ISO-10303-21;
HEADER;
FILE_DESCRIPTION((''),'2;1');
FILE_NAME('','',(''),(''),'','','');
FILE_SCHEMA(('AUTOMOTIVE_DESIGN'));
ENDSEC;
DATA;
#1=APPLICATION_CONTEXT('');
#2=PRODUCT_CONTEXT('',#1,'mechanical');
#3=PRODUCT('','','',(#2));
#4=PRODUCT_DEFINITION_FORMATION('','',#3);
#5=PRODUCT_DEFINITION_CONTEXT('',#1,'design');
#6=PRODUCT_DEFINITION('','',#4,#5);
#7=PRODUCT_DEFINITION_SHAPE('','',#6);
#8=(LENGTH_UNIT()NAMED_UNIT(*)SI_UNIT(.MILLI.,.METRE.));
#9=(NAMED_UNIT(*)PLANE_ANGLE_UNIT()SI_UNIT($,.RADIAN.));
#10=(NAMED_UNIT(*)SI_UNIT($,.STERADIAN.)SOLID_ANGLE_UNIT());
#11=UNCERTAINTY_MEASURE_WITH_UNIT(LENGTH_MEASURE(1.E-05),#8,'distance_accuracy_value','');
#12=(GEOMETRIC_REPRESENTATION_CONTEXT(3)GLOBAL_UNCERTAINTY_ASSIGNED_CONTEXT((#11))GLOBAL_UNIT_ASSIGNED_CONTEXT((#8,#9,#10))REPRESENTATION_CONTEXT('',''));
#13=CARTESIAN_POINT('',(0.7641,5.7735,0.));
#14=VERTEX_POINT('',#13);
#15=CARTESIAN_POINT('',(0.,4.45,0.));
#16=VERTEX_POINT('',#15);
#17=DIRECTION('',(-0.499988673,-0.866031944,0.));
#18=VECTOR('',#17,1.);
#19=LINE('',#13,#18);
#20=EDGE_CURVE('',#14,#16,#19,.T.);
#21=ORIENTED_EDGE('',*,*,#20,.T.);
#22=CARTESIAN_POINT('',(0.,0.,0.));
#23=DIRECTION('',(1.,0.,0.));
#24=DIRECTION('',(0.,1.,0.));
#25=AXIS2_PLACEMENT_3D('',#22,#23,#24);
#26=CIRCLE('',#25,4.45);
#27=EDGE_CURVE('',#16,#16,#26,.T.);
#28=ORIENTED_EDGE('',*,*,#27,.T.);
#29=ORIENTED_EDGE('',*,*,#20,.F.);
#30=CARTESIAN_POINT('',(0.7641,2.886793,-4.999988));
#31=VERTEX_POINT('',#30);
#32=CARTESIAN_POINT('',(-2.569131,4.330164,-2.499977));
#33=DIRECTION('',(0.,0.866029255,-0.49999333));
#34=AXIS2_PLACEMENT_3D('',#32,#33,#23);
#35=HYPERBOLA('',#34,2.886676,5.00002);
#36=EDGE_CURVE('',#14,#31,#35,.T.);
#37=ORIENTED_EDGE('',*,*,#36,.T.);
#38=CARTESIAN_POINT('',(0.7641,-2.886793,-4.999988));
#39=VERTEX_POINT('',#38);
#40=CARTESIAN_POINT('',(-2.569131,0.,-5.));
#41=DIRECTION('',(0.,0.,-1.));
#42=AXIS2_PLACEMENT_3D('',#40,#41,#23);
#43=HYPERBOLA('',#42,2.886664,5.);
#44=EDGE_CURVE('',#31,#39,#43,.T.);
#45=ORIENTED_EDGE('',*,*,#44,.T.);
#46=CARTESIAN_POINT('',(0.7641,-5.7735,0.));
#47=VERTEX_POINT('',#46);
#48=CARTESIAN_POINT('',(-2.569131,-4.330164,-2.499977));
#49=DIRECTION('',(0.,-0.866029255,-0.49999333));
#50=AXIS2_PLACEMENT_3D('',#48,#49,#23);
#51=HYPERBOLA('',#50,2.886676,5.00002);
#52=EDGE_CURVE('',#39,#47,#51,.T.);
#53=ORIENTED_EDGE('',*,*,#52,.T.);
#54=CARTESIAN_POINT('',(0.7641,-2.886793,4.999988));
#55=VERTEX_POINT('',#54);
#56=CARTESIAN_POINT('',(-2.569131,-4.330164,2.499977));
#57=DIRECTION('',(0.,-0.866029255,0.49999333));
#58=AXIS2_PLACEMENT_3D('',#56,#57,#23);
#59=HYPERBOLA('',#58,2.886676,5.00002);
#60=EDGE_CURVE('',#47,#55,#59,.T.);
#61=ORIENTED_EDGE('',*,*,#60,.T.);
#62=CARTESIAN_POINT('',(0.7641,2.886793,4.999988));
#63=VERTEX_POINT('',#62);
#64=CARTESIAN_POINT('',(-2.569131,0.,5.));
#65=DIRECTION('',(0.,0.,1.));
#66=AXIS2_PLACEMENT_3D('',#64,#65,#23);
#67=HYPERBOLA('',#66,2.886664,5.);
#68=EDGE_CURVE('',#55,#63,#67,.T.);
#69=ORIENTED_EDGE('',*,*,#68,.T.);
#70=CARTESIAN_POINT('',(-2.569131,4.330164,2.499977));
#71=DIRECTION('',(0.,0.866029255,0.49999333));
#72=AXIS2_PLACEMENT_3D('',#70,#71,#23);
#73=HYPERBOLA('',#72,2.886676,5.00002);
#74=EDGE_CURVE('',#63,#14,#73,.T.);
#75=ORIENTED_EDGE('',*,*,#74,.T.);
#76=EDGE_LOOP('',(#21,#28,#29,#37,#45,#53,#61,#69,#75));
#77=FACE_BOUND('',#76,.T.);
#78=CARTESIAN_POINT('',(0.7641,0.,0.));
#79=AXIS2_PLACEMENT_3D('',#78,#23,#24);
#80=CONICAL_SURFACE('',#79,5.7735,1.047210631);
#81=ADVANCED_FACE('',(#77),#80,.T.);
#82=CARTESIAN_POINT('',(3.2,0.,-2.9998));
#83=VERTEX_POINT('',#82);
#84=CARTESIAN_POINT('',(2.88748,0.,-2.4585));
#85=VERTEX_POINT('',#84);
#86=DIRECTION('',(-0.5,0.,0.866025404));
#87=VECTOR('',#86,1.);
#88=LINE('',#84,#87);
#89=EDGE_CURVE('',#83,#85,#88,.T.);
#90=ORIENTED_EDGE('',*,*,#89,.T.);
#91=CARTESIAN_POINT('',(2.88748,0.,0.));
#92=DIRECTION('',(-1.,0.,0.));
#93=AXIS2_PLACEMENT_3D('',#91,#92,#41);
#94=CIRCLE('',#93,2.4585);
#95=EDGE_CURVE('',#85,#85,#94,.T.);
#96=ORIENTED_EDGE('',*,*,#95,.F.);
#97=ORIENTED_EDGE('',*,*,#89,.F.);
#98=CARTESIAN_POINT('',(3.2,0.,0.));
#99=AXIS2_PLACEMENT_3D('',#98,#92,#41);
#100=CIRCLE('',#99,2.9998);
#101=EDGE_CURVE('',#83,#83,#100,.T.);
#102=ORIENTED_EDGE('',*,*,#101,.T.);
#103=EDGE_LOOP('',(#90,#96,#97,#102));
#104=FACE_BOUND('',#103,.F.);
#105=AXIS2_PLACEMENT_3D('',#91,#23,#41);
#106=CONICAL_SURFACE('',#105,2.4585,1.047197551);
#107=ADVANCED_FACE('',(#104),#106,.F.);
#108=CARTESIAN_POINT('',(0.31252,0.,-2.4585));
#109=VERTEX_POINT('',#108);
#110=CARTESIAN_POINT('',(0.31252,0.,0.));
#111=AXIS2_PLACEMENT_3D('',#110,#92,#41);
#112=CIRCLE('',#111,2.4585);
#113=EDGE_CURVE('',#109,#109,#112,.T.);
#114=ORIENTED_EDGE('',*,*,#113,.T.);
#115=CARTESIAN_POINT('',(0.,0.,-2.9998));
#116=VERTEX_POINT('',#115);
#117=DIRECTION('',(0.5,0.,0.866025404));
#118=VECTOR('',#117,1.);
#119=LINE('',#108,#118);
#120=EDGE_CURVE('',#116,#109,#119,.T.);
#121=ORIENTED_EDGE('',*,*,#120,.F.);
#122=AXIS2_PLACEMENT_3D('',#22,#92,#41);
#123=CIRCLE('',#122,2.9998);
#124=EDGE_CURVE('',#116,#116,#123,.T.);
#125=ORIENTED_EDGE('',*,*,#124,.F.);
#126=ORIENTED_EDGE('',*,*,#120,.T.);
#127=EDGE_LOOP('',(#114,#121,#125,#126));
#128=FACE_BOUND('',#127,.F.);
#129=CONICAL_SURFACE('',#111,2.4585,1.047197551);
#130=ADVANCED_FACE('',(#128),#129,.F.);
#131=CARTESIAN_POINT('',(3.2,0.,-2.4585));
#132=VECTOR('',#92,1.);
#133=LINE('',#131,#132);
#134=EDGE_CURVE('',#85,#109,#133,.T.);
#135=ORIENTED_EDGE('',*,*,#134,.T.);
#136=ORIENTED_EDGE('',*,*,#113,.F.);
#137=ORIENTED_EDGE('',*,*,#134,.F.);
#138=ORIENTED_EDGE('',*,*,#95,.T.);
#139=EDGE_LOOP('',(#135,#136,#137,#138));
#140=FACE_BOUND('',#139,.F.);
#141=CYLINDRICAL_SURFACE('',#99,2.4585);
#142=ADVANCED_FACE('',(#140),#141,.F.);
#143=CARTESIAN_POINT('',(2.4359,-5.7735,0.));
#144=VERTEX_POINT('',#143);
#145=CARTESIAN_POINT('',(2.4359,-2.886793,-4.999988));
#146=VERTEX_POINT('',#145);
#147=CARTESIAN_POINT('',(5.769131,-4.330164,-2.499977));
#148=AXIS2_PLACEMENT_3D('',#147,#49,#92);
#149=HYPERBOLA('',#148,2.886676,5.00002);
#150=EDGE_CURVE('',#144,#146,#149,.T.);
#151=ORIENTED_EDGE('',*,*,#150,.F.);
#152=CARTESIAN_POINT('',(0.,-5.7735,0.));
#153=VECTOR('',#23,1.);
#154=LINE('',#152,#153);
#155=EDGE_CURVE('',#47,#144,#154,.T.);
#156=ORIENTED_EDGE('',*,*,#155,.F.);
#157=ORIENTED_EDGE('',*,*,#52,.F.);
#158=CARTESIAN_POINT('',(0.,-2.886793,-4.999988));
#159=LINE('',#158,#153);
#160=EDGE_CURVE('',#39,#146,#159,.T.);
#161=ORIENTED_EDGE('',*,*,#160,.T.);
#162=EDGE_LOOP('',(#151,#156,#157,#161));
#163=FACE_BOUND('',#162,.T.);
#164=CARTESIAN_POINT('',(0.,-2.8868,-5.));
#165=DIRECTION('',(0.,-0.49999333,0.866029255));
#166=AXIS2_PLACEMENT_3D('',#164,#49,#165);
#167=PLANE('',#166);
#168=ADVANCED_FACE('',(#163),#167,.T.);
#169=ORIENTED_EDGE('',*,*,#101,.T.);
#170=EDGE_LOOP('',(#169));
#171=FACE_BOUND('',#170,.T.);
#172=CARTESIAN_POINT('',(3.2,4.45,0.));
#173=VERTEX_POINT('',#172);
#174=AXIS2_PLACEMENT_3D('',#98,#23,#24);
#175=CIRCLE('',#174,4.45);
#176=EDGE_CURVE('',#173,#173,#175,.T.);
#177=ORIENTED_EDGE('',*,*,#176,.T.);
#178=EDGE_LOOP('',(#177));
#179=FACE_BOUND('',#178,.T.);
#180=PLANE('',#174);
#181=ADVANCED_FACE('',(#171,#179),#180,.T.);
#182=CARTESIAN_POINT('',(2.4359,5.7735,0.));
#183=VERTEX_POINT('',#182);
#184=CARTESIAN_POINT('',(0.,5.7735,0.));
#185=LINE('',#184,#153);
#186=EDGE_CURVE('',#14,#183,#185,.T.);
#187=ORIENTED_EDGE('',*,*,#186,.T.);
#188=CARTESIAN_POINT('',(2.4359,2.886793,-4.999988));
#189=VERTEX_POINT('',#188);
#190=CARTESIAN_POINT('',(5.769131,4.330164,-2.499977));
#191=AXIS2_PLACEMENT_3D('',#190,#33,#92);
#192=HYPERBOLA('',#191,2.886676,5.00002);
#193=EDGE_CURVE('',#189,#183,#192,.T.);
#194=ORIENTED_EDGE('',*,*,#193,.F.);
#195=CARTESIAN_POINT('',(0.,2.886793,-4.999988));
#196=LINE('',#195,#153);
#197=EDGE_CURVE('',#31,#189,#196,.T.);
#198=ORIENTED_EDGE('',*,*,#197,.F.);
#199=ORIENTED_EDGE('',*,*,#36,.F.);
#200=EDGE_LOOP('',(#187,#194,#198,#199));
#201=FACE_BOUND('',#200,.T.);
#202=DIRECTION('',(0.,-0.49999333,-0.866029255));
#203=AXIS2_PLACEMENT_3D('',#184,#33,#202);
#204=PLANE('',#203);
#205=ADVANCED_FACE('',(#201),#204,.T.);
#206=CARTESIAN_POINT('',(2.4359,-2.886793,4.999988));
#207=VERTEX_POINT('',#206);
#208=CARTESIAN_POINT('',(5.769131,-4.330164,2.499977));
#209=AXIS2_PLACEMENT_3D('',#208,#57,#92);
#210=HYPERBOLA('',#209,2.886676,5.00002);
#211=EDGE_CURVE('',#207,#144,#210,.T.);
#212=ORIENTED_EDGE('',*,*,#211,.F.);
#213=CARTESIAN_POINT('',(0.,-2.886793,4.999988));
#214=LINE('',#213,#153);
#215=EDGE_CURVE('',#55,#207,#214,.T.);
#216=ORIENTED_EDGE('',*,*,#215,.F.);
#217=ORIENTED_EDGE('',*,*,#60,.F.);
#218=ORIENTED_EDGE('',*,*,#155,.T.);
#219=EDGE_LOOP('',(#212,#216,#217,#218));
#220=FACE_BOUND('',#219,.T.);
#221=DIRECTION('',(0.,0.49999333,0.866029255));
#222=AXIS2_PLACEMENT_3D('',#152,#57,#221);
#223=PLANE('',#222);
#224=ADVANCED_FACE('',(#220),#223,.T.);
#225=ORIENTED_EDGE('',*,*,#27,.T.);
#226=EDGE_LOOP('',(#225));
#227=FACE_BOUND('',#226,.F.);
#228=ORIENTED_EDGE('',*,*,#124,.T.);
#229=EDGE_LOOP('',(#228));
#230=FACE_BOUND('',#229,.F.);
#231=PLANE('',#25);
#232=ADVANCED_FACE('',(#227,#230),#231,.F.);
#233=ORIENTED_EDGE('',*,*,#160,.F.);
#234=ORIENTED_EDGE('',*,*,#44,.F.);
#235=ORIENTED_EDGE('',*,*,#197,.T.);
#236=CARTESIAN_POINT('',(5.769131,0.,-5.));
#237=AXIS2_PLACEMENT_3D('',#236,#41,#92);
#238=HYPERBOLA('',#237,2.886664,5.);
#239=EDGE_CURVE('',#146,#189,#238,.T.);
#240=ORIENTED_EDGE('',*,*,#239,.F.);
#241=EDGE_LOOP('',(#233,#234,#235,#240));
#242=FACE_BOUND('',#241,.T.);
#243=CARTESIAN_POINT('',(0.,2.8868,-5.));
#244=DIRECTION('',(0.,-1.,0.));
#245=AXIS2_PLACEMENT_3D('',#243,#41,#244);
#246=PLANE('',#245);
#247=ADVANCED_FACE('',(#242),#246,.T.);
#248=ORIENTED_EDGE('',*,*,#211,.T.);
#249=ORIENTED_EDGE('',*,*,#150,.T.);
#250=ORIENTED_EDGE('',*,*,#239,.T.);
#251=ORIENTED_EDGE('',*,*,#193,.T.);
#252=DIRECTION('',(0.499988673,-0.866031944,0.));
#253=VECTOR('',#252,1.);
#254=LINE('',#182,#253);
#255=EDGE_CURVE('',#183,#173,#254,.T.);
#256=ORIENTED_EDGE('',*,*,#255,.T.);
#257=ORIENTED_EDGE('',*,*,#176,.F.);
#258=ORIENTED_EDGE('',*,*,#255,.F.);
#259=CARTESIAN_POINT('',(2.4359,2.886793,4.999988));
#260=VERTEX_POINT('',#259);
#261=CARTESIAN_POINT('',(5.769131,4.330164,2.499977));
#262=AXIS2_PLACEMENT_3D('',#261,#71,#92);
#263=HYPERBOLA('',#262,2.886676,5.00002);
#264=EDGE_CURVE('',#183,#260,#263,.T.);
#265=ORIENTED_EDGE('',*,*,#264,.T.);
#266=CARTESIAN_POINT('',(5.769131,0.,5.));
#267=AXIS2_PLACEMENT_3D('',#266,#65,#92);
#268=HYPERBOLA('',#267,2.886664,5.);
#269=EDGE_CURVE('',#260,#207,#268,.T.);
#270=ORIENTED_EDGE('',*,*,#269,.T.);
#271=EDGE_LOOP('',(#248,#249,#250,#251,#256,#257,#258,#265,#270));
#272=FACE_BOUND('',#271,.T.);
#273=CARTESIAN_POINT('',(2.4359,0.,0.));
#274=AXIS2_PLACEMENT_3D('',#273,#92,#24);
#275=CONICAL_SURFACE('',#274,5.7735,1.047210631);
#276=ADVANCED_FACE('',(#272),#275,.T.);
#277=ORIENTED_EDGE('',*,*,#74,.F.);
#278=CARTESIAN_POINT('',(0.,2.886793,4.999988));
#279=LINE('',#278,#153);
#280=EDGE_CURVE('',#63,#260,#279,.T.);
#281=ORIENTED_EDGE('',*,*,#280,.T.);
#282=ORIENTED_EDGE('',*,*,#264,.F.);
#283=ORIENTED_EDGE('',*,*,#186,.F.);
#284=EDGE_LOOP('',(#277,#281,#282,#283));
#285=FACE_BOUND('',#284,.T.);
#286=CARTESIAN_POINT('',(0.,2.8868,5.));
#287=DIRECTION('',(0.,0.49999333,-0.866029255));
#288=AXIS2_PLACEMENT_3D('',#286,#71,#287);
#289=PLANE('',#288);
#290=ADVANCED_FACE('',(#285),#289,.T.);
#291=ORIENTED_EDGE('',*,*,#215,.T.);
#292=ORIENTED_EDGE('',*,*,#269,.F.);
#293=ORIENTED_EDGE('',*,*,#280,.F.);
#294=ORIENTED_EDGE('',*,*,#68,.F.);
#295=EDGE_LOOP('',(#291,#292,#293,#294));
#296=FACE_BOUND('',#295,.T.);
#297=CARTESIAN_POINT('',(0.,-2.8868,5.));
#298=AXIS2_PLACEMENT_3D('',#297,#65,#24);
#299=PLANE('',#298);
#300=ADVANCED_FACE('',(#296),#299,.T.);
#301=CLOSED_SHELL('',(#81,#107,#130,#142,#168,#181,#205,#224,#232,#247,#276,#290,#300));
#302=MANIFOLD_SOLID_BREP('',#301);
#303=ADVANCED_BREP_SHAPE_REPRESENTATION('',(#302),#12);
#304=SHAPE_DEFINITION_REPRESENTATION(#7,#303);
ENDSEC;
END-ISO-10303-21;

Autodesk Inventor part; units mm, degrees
ref_plane "YZ Plane" through (0, 0, 0) normal (1, 0, 0) x (0, 1, 0)
ref_plane "XZ Plane" through (0, 0, 0) normal (0, 1, 0) x (-1, 0, 0)
sketch "Szkic1" plane through (0, 0, 0) normal (1, 0, 0) x (0, 1, 0)
  line L0 (-5.7735, 0) -> (-2.8868, 5)
  line L1 (-2.8868, 5) -> (2.8868, 5)
  line L2 (2.8868, 5) -> (5.7735, 0)
  line L3 (5.7735, 0) -> (2.8868, -5)
  line L4 (2.8868, -5) -> (-2.8868, -5)
  line L5 (-2.8868, -5) -> (-5.7735, 0)
  point P0 (0, 0)
  point P1 (0, 0)
  dimension "d0" = 11.547
extrude "Bryła" add sketch "Szkic1" along normal blind 3.2
sketch "Szkic2" plane through (0, 0, 0) normal (0, 0, 1) x (1, 0, 0)
  line L0 (0, 2.8868) -> (0, 5.7735) projected
  line L1 (0, 5.7735) -> (3.2, 5.7735) projected
  line L2 (3.2, 2.8868) -> (3.2, 5.7735) projected
  line L3 (-0.64, 0) -> (3.84, 0) projected
  line L4 (0.7641, 5.7735) -> (0, 4.45)
  line L5 (2.4359, 5.7735) -> (3.2, 4.45)
  dimension "d3" = 30
  dimension "d4" = 30
  dimension "d5" = 8.9
  dimension "d6" = 8.9
revolve "Faza1" cut sketch "Szkic2" angle 360 about axis through (-10, 0, 0) along (1, 0, 0)
sketch "Szkic3" plane through (3.2, 0, 0) normal (1, 0, 0) x (0, 0, -1)
  arc A0 (-0.625, -1.0825) -> (0.625, -1.0825) centre (0, 0) ccw projected
hole "Gwint" at (3.2, 0, 0) direction (-1, 0, 0) diameter 4.917 end through all thread size "M6x1" class "6H" standard "ISO Metric profile"
chamfer "Faza2" distance 0.5413 angle 30 1 edges at (3.2, 0, 2.4585) measured on face at (3.2, 3.7371, -0.4538)
chamfer "Faza3" distance 0.5413 angle 30 1 edges at (0, 0, 2.4585) measured on face at (0, 3.7371, -0.4538)
ref_plane "Work Plane1" through (-12.4358, 0, 0) normal (0, -0.8660254, -0.5) x (1, 0, 0)
equation "\"d0\" = 1.1547 * SW"
equation "\"d1\" = KOH"
equation "\"d3\" = ANG1"
equation "\"d4\" = ANG2"
equation "\"d5\" = SW0"
equation "\"d6\" = SW01"
equation "\"d8\" = -0.5 * GD1 + 0.5 * NND"
equation "\"d40\" = -0.5 * GD1 + 0.5 * NND"
equation "\"d10\" = -0.5 * GD1 + 0.5 * NND"
equation "\"d41\" = -0.5 * GD1 + 0.5 * NND"
equation "\"ANG1\" = 30deg"
equation "\"ANG2\" = 30deg"
equation "\"NND\" = 6"
equation "\"KOH\" = 3.2"
equation "\"SW0\" = 8.9"
equation "\"SW01\" = SW0"
equation "\"GUL\" = 0.541266 * PTC"
equation "\"THREADDIA\" = 6"
equation "\"TOA\" = 30deg"
equation "\"PTC\" = 1"
equation "\"E0\" = 1.155 * SW"
equation "\"GAL\" = 0.541266 * PTC"
equation "\"SW\" = 10"
equation "\"GD1\" = 4.917468"
properties part number "ISO 4035 - M6" material "Stal nierdzewna 440C"
